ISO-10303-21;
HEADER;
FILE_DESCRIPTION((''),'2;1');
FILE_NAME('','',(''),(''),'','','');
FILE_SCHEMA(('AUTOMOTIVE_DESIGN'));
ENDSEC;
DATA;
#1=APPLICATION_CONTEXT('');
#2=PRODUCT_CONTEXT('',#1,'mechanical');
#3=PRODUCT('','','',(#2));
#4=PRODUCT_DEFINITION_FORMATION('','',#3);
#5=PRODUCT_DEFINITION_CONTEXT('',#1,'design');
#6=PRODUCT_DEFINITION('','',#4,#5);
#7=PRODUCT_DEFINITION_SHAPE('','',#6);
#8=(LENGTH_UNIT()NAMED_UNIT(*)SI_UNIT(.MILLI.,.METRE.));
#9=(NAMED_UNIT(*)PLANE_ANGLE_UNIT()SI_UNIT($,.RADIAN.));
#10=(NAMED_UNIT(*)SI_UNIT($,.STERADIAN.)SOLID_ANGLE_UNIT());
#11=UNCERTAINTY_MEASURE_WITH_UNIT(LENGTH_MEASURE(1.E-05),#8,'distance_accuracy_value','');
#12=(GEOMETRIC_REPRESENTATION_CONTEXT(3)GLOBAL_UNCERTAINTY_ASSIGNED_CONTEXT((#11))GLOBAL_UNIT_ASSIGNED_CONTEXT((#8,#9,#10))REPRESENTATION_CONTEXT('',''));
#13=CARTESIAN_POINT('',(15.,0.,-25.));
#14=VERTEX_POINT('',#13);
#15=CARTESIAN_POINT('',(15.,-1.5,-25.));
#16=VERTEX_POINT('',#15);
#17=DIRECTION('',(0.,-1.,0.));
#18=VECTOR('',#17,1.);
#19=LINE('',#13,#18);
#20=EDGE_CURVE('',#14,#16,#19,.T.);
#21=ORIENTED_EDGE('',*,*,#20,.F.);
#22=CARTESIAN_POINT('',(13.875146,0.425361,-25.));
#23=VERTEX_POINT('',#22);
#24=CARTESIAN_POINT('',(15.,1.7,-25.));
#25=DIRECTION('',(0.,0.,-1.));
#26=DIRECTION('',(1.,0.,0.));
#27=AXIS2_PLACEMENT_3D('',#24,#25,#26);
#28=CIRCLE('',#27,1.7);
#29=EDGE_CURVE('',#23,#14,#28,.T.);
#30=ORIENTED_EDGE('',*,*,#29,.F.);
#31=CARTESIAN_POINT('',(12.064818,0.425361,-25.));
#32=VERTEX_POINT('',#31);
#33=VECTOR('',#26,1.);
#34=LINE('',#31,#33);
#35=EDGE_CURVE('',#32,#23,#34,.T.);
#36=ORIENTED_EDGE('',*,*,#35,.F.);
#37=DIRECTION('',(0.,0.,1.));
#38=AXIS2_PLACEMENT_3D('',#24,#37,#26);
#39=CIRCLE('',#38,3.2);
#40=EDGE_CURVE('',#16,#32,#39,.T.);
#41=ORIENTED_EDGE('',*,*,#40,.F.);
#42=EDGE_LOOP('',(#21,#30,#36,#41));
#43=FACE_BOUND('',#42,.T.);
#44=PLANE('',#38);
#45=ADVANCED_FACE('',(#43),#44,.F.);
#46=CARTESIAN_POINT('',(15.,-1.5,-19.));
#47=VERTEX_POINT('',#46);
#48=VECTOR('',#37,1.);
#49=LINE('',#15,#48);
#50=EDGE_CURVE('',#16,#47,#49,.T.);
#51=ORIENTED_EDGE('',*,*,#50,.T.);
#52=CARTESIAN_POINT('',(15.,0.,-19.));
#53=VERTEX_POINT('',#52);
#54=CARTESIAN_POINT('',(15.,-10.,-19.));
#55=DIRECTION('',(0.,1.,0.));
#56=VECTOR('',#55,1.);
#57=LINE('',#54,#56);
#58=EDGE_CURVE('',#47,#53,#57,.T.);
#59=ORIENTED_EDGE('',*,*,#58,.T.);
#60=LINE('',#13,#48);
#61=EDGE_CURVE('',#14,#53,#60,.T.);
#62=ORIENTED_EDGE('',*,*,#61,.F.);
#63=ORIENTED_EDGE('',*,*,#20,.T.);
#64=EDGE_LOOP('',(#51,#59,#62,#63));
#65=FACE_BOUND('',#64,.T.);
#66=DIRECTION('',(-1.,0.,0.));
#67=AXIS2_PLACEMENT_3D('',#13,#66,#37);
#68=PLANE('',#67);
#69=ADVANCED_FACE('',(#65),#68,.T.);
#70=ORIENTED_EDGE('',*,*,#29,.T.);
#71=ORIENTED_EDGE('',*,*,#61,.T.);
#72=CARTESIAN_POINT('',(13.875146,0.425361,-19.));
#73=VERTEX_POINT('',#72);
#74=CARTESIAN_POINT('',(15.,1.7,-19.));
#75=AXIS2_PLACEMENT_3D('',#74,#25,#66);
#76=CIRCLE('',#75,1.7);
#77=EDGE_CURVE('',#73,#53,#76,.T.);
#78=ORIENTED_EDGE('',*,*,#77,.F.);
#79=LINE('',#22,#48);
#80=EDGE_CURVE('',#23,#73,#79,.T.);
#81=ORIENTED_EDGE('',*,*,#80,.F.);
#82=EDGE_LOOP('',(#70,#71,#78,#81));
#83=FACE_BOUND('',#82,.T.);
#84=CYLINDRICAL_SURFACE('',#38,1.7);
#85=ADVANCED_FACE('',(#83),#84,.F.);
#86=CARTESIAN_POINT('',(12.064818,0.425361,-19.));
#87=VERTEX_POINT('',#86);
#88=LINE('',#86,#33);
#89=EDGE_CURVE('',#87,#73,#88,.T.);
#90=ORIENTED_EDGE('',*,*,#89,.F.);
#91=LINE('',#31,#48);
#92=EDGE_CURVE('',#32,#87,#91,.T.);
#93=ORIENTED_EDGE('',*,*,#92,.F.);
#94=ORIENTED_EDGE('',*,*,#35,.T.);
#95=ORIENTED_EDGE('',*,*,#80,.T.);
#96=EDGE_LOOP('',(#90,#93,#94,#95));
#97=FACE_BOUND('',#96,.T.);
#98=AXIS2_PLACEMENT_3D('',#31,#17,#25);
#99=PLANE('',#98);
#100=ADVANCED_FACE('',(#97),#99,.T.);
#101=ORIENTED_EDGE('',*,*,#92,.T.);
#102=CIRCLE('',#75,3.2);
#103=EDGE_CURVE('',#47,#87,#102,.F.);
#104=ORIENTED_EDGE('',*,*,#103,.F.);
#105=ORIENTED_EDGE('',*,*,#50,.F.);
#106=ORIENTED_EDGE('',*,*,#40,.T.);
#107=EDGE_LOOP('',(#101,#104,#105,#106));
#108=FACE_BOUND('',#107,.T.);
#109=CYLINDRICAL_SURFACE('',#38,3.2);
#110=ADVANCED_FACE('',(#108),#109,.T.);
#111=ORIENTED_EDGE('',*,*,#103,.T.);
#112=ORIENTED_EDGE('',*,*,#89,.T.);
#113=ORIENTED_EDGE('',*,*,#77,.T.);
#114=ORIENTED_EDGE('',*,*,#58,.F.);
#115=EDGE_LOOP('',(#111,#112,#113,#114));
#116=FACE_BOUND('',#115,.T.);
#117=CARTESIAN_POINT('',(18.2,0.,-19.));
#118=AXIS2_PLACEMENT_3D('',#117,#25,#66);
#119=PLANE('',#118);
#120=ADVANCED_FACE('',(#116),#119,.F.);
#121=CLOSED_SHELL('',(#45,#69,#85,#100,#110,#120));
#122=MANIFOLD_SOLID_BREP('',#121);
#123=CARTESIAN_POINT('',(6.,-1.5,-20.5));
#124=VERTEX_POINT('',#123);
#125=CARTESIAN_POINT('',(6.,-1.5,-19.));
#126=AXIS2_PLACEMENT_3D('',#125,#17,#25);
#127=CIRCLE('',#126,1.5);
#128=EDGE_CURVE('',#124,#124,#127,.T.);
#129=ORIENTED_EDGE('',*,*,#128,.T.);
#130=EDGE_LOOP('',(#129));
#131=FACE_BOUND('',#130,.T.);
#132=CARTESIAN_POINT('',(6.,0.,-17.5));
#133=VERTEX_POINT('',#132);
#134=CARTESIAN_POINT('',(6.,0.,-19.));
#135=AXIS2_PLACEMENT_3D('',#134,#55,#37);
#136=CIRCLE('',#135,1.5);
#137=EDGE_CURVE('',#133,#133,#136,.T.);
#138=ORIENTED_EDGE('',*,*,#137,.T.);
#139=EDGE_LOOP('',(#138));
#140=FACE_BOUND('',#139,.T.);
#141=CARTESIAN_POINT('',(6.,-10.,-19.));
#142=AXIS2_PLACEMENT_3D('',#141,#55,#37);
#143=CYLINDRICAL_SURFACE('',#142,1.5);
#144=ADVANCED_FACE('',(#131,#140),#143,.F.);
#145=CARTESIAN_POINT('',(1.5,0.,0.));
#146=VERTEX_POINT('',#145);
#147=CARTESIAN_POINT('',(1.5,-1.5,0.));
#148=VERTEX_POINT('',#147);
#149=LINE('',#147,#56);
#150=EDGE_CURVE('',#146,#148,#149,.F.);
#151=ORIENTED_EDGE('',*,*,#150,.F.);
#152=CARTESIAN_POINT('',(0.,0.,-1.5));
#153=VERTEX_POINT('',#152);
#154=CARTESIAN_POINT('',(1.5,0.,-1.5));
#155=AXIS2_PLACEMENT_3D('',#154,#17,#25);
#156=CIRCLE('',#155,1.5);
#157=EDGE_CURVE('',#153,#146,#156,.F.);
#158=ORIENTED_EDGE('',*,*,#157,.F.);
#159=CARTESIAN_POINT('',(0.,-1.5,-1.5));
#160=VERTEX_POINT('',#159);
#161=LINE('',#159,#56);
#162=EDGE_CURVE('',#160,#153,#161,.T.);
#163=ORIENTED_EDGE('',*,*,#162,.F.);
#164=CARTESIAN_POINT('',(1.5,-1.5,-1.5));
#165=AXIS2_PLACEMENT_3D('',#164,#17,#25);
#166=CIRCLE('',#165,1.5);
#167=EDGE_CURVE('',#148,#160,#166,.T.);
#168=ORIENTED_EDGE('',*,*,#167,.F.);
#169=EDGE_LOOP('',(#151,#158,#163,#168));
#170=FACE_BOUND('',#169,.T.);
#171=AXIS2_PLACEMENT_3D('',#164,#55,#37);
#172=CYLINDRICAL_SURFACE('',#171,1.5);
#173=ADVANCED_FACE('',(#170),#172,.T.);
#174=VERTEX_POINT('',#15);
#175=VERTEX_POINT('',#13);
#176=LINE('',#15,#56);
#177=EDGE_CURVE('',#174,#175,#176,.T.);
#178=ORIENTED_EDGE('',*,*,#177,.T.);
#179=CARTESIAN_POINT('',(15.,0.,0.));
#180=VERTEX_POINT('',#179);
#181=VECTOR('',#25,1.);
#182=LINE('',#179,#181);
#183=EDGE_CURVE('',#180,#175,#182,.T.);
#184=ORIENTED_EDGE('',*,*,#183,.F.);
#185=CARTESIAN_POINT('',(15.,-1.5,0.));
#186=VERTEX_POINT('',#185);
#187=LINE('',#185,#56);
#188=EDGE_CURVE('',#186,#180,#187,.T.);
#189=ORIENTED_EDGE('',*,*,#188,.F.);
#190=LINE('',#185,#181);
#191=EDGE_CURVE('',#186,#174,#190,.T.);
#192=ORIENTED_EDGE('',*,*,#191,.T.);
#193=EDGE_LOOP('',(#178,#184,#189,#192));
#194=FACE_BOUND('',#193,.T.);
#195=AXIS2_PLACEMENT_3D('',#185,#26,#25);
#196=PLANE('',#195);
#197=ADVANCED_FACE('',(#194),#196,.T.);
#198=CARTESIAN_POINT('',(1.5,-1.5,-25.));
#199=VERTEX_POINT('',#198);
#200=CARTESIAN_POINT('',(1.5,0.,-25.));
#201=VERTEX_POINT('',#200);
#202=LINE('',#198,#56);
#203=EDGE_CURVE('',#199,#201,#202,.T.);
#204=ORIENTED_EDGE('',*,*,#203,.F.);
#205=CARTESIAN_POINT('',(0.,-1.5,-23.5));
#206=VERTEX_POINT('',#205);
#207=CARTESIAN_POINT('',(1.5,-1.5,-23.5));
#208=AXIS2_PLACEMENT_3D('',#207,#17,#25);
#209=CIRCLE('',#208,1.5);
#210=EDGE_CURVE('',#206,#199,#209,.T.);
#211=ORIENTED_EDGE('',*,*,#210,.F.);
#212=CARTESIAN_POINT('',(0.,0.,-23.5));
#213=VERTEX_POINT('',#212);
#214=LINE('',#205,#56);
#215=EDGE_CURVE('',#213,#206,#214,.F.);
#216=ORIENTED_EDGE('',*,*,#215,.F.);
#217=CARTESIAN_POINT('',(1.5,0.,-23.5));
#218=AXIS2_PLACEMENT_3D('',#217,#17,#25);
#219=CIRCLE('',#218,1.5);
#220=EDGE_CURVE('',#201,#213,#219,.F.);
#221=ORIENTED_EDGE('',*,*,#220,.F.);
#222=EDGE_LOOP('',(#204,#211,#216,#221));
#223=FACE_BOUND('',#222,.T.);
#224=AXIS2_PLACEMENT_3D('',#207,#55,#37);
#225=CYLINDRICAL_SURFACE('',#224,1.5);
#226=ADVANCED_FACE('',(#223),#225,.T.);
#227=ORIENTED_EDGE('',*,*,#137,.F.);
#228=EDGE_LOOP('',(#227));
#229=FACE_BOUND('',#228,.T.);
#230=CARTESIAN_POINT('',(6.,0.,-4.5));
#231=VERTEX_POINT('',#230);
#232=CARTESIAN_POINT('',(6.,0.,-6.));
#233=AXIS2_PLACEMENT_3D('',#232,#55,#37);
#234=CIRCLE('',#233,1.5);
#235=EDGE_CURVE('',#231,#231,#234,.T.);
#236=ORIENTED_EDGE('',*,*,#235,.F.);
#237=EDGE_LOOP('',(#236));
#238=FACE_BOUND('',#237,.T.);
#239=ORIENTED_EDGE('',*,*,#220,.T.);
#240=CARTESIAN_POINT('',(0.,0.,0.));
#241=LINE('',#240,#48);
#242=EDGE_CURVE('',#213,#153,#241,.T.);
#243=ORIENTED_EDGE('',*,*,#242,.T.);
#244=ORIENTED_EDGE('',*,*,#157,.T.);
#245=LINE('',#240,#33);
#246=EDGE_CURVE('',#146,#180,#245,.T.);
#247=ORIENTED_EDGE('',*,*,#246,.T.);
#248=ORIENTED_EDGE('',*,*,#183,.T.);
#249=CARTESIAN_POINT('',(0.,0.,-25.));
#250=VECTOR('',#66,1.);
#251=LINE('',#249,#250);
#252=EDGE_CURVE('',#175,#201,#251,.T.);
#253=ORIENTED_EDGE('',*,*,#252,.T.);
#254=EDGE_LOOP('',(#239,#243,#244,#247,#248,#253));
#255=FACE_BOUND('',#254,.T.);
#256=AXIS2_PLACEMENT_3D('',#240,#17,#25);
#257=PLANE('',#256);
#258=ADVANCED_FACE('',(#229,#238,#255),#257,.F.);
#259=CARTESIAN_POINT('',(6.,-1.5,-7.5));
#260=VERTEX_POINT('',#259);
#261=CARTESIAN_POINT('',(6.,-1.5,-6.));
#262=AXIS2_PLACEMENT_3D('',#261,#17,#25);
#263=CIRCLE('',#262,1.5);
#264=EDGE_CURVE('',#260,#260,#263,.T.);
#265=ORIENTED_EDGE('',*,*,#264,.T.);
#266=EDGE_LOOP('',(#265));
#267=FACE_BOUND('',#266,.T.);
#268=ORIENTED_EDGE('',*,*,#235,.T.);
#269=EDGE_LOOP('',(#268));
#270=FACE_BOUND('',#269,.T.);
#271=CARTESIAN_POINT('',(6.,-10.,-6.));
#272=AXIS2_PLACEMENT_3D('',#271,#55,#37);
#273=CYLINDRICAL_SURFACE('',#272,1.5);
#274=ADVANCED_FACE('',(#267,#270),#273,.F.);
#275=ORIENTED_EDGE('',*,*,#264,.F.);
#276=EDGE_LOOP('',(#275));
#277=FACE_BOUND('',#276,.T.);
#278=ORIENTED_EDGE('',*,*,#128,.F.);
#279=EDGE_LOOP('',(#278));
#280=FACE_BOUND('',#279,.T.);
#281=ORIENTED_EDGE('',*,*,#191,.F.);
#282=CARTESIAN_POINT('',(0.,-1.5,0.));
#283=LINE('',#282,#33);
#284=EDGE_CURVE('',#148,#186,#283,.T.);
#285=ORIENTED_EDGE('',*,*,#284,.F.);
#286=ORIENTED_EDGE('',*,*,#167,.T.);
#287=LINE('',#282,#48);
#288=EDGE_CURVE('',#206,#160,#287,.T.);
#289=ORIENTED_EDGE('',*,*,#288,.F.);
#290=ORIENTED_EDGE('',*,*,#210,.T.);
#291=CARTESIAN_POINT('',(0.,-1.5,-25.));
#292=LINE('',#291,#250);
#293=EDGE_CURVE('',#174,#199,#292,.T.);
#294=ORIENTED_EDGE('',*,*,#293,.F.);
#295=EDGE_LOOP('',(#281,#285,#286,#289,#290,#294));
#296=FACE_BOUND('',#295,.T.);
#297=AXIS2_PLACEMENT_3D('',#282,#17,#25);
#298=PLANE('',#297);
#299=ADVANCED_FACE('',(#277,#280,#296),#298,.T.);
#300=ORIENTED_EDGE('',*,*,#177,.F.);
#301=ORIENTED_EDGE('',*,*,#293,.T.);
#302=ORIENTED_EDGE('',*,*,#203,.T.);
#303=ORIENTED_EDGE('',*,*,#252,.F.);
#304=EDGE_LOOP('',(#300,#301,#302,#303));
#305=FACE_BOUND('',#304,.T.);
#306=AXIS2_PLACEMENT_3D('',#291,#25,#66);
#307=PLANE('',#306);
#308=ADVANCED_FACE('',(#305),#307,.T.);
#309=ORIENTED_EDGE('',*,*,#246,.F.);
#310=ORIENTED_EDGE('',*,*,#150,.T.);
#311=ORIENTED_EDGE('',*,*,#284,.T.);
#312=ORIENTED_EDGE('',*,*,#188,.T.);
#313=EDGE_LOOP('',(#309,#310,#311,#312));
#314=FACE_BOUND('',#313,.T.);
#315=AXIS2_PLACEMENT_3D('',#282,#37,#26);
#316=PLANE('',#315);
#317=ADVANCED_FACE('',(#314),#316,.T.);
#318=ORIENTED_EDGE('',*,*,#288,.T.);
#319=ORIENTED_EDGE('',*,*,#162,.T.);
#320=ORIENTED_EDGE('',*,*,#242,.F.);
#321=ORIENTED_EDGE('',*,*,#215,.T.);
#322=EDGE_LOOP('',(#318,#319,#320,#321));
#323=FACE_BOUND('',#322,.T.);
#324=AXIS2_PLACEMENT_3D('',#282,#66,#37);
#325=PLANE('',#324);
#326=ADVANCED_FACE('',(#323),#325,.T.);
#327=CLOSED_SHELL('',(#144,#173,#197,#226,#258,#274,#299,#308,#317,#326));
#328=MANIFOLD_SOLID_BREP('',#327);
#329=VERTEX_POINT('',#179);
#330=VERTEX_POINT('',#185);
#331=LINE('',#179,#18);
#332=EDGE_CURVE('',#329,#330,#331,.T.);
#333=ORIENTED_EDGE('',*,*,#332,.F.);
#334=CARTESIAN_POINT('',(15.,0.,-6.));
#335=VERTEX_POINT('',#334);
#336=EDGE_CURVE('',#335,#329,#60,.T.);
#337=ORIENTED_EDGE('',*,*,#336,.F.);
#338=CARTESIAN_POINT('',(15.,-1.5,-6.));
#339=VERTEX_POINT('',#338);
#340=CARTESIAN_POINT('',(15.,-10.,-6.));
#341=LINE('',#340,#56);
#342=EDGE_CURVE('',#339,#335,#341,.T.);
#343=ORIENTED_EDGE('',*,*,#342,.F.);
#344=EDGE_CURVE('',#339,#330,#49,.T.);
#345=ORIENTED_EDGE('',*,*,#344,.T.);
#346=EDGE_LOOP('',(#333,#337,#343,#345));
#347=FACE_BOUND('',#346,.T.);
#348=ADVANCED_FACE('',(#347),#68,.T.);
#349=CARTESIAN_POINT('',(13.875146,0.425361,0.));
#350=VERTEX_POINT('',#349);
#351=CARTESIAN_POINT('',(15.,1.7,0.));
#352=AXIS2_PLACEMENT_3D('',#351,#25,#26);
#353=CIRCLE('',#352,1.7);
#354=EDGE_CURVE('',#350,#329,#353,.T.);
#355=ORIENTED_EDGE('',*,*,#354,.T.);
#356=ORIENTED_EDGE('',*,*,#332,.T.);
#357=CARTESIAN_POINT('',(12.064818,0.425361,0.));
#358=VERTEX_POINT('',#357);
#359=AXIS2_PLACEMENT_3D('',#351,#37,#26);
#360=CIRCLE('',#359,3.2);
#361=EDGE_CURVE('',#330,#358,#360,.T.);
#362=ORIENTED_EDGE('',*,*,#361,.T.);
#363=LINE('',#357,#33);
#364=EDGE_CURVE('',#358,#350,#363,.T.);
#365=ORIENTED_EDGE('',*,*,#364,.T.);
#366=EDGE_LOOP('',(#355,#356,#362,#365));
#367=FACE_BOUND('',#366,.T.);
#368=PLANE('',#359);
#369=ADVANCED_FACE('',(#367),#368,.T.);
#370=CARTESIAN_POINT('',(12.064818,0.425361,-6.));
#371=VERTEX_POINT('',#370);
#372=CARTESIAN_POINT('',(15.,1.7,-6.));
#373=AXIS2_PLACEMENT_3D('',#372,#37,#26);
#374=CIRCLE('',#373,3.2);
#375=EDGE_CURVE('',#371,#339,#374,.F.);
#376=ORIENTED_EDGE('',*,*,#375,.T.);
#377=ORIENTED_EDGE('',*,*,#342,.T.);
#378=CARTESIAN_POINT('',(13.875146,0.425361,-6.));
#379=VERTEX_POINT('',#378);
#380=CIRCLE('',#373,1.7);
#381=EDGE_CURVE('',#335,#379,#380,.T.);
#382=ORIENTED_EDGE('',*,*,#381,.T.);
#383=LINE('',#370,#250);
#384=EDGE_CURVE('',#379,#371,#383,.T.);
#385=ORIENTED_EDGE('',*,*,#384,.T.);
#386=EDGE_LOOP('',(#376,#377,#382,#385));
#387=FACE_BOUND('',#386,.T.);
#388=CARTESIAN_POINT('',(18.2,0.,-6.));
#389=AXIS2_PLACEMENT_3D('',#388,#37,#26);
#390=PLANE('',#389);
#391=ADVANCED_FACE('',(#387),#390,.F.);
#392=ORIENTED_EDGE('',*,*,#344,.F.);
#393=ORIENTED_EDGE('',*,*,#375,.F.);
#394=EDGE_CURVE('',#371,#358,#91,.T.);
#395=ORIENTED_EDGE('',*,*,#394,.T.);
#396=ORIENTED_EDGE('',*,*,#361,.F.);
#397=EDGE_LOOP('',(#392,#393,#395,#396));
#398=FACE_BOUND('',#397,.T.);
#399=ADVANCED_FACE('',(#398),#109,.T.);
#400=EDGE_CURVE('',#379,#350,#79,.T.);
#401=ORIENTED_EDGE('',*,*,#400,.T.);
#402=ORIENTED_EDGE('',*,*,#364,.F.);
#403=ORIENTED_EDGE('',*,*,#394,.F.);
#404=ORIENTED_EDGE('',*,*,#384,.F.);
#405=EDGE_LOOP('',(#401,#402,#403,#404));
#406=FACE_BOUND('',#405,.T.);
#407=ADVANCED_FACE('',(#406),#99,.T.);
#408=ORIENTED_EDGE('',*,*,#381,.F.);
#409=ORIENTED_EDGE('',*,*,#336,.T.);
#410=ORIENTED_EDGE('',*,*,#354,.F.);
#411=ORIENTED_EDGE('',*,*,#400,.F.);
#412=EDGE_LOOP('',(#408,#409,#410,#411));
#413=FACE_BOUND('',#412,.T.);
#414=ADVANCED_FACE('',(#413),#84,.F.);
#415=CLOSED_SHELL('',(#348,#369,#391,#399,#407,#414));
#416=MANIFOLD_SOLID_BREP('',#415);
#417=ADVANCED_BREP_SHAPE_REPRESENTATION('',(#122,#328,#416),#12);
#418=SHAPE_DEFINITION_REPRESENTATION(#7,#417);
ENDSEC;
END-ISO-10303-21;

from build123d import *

# Parameters (mm, degrees)
SKETCH_1_W             = 15
SKETCH_1_H             = 25
SM_BASE_FLANGE_1_DEPTH = 1.5
SKETCH_6_R             = 1.5
CUT_EXTRUDE_1_DEPTH    = 10
SM_BASE_FLANGE_2_DEPTH = 25
SKETCH_10_W            = 13
SKETCH_10_H            = 7.865530851
CUT_EXTRUDE_3_DEPTH    = 32.308944409
SKETCH_11_W            = 2.711088342
SKETCH_11_H            = 13
CUT_EXTRUDE_5_DEPTH    = 10
FILLET_1_R             = 1.5


# Sheet-metal steps are written as plain solids
with BuildPart() as part:
    # Sketch 1 → 基体-法兰1 (new body)
    with BuildSketch(Plane(origin=(0, 0, 0), x_dir=(1, 0, 0), z_dir=(0, 1, 0))):
        with Locations((7.5, 12.5)):
            Rectangle(SKETCH_1_W, SKETCH_1_H)
    extrude(amount=-SM_BASE_FLANGE_1_DEPTH)

    # Sketch 6 → 切除-拉伸1 (cut)
    with BuildSketch(Plane(origin=(0, 0, 0), x_dir=(1, 0, 0), z_dir=(0, 1, 0))):
        with Locations(Location((6, 19, 0), (0, 0, 270))):
            Circle(SKETCH_6_R)
        with Locations(Location((6, 6, 0), (0, 0, 270))):
            Circle(SKETCH_6_R)
    extrude(amount=-CUT_EXTRUDE_1_DEPTH, mode=Mode.SUBTRACT)

    # 圆角1
    fillet_1_edges = [part.edges().sort_by_distance(p)[0] for p in [
        (0, -0.75, -25),
        (0, -0.75, 0),
    ]]
    fillet(fillet_1_edges, radius=FILLET_1_R)


with BuildPart() as body_2:
    # Sketch 7 → 基体-法兰2 (new body)
    with BuildSketch(Plane.XY):
        with BuildLine():
            Line((15, 0), (15, -1.5))
            ThreePointArc((15, -1.5), (16.755157486, 4.375709662), (12.064817597, 0.425361126))
            Line((12.064817597, 0.425361126), (13.875146347, 0.425361126))
            ThreePointArc((13.875146347, 0.425361126), (15.601296065, 3.290107871), (15, 0))
        make_face()
    extrude(amount=-SM_BASE_FLANGE_2_DEPTH)

    # 草图10 → 切除-拉伸3 (cut, through all)
    with BuildSketch(Plane.ZY):
        with Locations((-12.5, 3.932765426)):
            Rectangle(SKETCH_10_W, SKETCH_10_H)
    extrude(amount=-CUT_EXTRUDE_3_DEPTH, mode=Mode.SUBTRACT)

    # 草图11 → 切除-拉伸5 (cut)
    with BuildSketch(Plane(origin=(0, 0, 0), x_dir=(1, 0, 0), z_dir=(0, 1, 0))):
        with Locations((16.355544171, 12.5)):
            Rectangle(SKETCH_11_W, SKETCH_11_H)
    extrude(amount=-CUT_EXTRUDE_5_DEPTH, mode=Mode.SUBTRACT)


with BuildPart() as cut_extrude_5_piece_1:
    # of the separate pieces the step leaves, piece 1, a body of its own (cut_extrude_5_pieces)
    add(body_2.part.solids().sort_by_distance((12.064817597, 0.425361126, 0))[0])


with BuildPart() as cut_extrude_5_piece_2:
    # of the separate pieces the step leaves, piece 2, a body of its own (cut_extrude_5_pieces)
    add(body_2.part.solids().sort_by_distance((15, -1.5, -19))[0])


solid = Compound([part.part, cut_extrude_5_piece_1.part, cut_extrude_5_piece_2.part])
